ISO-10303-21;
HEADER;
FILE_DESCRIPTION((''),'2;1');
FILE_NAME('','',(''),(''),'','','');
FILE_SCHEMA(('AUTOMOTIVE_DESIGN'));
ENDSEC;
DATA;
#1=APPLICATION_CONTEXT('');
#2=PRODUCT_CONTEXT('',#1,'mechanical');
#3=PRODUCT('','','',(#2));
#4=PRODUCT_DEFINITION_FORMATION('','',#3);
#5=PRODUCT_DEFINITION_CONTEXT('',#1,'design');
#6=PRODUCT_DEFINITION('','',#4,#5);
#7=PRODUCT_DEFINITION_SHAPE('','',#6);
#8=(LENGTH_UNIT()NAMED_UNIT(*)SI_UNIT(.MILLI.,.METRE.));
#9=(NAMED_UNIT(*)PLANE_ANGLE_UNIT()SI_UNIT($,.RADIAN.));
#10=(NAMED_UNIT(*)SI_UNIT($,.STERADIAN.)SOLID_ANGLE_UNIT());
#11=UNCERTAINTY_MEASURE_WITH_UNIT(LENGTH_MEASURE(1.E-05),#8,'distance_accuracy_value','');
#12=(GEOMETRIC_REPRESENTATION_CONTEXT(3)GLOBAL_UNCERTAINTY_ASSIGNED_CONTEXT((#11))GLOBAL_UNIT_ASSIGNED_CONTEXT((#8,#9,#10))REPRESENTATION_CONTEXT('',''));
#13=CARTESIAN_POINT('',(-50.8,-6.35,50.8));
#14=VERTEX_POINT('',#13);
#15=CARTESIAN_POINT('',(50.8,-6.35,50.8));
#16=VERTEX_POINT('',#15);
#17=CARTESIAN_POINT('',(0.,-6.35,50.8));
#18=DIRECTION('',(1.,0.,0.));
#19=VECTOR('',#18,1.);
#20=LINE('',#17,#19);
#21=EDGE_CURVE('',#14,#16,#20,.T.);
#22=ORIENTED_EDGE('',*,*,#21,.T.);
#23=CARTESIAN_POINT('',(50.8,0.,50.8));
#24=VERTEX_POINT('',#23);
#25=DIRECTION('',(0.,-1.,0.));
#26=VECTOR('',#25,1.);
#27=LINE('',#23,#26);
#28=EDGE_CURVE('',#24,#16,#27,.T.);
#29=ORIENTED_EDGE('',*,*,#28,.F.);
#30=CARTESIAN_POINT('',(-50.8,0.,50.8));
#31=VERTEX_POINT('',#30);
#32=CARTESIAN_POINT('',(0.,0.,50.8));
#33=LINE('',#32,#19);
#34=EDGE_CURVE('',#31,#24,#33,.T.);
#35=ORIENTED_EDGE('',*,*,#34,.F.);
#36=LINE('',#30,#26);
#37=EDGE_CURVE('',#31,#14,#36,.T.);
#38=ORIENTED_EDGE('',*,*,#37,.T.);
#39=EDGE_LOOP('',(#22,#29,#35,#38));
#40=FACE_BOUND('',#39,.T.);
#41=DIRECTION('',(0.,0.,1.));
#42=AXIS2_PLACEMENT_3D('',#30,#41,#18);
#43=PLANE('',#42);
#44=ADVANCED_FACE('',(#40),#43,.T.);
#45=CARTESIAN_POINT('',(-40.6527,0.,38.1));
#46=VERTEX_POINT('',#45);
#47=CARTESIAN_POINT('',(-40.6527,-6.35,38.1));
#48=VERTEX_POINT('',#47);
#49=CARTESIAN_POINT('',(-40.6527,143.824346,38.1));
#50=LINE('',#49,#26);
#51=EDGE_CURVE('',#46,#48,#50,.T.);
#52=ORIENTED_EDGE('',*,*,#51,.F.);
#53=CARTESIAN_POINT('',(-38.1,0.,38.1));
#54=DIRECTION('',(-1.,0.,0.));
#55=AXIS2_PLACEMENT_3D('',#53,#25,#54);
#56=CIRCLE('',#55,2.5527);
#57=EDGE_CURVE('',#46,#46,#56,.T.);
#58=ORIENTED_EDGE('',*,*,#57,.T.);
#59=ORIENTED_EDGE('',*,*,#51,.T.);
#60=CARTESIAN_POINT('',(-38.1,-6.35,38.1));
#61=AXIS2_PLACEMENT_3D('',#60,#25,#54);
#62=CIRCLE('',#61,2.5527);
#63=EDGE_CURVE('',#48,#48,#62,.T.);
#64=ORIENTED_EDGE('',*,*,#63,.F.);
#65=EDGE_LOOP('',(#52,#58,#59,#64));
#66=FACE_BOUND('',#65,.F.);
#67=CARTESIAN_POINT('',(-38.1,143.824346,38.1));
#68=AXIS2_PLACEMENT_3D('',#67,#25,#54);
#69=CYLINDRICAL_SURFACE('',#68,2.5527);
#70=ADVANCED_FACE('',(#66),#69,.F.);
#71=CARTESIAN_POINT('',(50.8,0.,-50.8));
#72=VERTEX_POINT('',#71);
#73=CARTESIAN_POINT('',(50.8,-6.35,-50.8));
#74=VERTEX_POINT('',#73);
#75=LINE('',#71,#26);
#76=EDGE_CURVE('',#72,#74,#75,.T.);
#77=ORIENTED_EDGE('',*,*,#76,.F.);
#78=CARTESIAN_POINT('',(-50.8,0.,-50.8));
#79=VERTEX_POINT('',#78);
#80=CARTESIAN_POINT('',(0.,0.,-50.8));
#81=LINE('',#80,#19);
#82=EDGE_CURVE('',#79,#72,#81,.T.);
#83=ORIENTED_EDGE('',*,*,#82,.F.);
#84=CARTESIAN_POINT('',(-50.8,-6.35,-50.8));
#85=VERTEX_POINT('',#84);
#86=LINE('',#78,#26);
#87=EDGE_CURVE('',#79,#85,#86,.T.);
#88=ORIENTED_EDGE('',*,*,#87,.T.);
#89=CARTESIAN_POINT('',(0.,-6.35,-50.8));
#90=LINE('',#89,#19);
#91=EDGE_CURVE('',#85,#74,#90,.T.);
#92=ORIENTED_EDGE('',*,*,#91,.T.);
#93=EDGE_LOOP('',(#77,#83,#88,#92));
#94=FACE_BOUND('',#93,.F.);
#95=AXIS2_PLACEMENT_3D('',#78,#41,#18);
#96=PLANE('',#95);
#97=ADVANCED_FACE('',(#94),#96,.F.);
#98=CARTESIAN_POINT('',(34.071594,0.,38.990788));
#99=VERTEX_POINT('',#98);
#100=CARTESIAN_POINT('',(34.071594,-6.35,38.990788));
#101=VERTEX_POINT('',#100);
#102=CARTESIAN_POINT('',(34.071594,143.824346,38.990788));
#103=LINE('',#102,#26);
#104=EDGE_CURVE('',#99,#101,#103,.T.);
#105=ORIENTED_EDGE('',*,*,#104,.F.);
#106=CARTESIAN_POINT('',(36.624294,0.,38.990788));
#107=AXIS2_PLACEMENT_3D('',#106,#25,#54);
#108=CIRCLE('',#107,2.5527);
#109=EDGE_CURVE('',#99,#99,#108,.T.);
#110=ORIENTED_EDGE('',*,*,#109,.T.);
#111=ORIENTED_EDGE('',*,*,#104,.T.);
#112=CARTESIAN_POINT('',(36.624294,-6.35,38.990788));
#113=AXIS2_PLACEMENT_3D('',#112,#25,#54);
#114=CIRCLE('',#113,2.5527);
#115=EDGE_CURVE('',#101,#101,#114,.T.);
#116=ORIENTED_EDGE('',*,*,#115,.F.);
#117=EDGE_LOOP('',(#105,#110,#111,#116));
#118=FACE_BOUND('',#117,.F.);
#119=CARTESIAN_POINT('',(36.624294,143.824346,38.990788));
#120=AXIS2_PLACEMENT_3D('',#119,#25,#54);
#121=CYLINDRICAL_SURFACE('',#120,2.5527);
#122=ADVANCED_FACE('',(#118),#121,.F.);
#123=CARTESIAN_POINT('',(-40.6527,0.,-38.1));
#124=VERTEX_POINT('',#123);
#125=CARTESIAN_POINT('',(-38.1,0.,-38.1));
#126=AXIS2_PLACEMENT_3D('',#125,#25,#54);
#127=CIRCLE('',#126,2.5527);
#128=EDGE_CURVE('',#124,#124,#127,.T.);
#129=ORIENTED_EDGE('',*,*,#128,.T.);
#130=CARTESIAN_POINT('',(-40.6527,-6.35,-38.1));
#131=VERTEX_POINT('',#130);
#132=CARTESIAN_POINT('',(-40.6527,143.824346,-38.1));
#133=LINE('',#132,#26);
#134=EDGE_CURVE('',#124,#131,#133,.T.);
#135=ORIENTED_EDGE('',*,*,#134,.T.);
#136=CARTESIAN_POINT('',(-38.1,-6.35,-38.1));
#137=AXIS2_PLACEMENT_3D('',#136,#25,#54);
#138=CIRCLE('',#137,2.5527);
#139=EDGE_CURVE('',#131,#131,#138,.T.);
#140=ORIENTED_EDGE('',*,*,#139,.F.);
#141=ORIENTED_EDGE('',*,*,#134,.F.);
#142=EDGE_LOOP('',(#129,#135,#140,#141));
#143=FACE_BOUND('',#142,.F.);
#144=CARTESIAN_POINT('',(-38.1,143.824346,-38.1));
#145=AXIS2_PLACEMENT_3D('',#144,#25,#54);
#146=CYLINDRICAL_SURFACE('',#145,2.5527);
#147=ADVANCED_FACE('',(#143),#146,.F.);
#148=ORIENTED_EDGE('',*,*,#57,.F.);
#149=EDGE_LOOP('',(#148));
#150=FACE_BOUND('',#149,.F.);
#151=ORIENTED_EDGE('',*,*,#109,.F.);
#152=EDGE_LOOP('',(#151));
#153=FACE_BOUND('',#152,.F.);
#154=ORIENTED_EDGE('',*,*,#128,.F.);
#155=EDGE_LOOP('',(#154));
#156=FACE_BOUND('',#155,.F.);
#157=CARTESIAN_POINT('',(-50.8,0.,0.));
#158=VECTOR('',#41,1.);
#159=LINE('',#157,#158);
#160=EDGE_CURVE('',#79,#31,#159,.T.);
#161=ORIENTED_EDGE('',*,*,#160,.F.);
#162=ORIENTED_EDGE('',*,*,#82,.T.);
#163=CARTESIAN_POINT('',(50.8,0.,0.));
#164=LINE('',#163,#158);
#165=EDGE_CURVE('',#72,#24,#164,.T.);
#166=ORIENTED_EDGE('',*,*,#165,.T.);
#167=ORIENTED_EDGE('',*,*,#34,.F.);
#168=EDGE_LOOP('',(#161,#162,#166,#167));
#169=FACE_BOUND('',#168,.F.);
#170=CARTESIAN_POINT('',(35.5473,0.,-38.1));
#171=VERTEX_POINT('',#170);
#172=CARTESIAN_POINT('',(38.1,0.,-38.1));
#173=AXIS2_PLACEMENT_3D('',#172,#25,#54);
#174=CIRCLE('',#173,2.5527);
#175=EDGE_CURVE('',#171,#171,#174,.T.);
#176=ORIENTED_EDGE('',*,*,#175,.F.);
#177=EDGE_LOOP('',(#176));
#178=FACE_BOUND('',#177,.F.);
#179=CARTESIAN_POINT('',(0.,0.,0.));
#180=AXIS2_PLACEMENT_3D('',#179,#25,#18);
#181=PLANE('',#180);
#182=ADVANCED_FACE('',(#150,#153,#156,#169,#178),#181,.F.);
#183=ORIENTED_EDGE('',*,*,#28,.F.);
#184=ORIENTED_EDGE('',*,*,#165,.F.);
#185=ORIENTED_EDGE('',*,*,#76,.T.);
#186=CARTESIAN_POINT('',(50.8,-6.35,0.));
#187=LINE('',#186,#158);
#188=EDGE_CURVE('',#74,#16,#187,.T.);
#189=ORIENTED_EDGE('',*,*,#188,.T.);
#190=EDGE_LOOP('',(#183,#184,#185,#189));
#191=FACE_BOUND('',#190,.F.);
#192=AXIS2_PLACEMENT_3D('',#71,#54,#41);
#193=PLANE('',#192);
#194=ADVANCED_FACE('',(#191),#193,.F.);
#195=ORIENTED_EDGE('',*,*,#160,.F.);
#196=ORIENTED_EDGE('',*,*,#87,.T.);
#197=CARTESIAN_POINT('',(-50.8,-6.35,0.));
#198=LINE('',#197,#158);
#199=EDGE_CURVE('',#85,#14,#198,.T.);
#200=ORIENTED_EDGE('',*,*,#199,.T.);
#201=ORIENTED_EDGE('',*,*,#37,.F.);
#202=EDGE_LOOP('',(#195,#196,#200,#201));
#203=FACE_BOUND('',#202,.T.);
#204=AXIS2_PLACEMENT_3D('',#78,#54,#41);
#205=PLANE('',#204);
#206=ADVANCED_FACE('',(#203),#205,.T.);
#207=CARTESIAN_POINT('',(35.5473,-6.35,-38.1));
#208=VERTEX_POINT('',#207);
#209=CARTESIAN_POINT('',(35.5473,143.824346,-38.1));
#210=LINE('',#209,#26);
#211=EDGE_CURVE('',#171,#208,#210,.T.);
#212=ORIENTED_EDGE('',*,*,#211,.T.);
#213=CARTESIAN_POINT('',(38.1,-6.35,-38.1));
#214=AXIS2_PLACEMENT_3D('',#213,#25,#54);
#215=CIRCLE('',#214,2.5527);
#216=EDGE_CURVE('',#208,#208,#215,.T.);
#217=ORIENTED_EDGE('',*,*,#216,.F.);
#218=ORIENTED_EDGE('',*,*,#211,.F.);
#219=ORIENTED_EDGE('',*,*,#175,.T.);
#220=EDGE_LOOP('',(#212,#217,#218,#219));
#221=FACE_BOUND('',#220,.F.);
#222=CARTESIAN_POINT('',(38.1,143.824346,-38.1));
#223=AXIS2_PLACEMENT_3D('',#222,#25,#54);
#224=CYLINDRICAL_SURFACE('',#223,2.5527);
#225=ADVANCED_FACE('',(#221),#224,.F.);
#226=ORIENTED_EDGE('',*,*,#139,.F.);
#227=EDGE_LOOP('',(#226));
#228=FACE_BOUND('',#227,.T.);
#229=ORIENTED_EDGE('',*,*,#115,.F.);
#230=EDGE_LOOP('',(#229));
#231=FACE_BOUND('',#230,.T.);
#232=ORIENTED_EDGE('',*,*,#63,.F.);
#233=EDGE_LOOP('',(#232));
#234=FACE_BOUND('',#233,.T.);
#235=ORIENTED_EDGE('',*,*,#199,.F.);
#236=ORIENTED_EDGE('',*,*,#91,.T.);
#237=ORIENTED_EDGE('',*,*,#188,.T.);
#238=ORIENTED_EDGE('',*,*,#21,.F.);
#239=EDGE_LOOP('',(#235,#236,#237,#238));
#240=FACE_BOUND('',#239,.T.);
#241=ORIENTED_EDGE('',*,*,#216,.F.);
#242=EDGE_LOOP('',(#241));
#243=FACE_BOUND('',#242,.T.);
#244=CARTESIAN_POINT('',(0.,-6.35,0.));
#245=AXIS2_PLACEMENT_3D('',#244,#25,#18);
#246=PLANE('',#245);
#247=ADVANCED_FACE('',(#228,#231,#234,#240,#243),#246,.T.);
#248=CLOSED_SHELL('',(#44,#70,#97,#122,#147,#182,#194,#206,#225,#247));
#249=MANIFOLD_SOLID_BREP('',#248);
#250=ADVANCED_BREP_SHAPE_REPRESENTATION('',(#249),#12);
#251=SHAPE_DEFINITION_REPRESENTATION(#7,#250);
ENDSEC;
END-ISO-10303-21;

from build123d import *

# Parameters (mm, degrees)
F0_W     = 101.6
F0_H     = 101.6
F1_DEPTH = 6.35
F2_D     = 5.1054
F3_D     = 5.1054


# Not quite as in the source:
# - a feature names something its author has since deleted; it is built from what else it names


with BuildPart() as f1:
    # F0 (on Front) → F1 (new body)
    with BuildSketch(Plane.XZ):
        Rectangle(F0_W, F0_H)
    extrude(amount=F1_DEPTH)

    # F2 (through all)
    with Locations(Plane(origin=(0, 0, 0), x_dir=(1, 0, 0), z_dir=(0, 1, 0))):
        with Locations((-38.1, -38.1), (38.1, 38.1), (-38.1, 38.1)):
            Hole(F2_D / 2)

    # F3 (through all)
    with Locations(Plane(origin=(0, 0, 0), x_dir=(1, 0, 0), z_dir=(0, 1, 0))):
        with Locations((36.6242937744, -38.9907881618)):
            Hole(F3_D / 2)


solid = f1.part
